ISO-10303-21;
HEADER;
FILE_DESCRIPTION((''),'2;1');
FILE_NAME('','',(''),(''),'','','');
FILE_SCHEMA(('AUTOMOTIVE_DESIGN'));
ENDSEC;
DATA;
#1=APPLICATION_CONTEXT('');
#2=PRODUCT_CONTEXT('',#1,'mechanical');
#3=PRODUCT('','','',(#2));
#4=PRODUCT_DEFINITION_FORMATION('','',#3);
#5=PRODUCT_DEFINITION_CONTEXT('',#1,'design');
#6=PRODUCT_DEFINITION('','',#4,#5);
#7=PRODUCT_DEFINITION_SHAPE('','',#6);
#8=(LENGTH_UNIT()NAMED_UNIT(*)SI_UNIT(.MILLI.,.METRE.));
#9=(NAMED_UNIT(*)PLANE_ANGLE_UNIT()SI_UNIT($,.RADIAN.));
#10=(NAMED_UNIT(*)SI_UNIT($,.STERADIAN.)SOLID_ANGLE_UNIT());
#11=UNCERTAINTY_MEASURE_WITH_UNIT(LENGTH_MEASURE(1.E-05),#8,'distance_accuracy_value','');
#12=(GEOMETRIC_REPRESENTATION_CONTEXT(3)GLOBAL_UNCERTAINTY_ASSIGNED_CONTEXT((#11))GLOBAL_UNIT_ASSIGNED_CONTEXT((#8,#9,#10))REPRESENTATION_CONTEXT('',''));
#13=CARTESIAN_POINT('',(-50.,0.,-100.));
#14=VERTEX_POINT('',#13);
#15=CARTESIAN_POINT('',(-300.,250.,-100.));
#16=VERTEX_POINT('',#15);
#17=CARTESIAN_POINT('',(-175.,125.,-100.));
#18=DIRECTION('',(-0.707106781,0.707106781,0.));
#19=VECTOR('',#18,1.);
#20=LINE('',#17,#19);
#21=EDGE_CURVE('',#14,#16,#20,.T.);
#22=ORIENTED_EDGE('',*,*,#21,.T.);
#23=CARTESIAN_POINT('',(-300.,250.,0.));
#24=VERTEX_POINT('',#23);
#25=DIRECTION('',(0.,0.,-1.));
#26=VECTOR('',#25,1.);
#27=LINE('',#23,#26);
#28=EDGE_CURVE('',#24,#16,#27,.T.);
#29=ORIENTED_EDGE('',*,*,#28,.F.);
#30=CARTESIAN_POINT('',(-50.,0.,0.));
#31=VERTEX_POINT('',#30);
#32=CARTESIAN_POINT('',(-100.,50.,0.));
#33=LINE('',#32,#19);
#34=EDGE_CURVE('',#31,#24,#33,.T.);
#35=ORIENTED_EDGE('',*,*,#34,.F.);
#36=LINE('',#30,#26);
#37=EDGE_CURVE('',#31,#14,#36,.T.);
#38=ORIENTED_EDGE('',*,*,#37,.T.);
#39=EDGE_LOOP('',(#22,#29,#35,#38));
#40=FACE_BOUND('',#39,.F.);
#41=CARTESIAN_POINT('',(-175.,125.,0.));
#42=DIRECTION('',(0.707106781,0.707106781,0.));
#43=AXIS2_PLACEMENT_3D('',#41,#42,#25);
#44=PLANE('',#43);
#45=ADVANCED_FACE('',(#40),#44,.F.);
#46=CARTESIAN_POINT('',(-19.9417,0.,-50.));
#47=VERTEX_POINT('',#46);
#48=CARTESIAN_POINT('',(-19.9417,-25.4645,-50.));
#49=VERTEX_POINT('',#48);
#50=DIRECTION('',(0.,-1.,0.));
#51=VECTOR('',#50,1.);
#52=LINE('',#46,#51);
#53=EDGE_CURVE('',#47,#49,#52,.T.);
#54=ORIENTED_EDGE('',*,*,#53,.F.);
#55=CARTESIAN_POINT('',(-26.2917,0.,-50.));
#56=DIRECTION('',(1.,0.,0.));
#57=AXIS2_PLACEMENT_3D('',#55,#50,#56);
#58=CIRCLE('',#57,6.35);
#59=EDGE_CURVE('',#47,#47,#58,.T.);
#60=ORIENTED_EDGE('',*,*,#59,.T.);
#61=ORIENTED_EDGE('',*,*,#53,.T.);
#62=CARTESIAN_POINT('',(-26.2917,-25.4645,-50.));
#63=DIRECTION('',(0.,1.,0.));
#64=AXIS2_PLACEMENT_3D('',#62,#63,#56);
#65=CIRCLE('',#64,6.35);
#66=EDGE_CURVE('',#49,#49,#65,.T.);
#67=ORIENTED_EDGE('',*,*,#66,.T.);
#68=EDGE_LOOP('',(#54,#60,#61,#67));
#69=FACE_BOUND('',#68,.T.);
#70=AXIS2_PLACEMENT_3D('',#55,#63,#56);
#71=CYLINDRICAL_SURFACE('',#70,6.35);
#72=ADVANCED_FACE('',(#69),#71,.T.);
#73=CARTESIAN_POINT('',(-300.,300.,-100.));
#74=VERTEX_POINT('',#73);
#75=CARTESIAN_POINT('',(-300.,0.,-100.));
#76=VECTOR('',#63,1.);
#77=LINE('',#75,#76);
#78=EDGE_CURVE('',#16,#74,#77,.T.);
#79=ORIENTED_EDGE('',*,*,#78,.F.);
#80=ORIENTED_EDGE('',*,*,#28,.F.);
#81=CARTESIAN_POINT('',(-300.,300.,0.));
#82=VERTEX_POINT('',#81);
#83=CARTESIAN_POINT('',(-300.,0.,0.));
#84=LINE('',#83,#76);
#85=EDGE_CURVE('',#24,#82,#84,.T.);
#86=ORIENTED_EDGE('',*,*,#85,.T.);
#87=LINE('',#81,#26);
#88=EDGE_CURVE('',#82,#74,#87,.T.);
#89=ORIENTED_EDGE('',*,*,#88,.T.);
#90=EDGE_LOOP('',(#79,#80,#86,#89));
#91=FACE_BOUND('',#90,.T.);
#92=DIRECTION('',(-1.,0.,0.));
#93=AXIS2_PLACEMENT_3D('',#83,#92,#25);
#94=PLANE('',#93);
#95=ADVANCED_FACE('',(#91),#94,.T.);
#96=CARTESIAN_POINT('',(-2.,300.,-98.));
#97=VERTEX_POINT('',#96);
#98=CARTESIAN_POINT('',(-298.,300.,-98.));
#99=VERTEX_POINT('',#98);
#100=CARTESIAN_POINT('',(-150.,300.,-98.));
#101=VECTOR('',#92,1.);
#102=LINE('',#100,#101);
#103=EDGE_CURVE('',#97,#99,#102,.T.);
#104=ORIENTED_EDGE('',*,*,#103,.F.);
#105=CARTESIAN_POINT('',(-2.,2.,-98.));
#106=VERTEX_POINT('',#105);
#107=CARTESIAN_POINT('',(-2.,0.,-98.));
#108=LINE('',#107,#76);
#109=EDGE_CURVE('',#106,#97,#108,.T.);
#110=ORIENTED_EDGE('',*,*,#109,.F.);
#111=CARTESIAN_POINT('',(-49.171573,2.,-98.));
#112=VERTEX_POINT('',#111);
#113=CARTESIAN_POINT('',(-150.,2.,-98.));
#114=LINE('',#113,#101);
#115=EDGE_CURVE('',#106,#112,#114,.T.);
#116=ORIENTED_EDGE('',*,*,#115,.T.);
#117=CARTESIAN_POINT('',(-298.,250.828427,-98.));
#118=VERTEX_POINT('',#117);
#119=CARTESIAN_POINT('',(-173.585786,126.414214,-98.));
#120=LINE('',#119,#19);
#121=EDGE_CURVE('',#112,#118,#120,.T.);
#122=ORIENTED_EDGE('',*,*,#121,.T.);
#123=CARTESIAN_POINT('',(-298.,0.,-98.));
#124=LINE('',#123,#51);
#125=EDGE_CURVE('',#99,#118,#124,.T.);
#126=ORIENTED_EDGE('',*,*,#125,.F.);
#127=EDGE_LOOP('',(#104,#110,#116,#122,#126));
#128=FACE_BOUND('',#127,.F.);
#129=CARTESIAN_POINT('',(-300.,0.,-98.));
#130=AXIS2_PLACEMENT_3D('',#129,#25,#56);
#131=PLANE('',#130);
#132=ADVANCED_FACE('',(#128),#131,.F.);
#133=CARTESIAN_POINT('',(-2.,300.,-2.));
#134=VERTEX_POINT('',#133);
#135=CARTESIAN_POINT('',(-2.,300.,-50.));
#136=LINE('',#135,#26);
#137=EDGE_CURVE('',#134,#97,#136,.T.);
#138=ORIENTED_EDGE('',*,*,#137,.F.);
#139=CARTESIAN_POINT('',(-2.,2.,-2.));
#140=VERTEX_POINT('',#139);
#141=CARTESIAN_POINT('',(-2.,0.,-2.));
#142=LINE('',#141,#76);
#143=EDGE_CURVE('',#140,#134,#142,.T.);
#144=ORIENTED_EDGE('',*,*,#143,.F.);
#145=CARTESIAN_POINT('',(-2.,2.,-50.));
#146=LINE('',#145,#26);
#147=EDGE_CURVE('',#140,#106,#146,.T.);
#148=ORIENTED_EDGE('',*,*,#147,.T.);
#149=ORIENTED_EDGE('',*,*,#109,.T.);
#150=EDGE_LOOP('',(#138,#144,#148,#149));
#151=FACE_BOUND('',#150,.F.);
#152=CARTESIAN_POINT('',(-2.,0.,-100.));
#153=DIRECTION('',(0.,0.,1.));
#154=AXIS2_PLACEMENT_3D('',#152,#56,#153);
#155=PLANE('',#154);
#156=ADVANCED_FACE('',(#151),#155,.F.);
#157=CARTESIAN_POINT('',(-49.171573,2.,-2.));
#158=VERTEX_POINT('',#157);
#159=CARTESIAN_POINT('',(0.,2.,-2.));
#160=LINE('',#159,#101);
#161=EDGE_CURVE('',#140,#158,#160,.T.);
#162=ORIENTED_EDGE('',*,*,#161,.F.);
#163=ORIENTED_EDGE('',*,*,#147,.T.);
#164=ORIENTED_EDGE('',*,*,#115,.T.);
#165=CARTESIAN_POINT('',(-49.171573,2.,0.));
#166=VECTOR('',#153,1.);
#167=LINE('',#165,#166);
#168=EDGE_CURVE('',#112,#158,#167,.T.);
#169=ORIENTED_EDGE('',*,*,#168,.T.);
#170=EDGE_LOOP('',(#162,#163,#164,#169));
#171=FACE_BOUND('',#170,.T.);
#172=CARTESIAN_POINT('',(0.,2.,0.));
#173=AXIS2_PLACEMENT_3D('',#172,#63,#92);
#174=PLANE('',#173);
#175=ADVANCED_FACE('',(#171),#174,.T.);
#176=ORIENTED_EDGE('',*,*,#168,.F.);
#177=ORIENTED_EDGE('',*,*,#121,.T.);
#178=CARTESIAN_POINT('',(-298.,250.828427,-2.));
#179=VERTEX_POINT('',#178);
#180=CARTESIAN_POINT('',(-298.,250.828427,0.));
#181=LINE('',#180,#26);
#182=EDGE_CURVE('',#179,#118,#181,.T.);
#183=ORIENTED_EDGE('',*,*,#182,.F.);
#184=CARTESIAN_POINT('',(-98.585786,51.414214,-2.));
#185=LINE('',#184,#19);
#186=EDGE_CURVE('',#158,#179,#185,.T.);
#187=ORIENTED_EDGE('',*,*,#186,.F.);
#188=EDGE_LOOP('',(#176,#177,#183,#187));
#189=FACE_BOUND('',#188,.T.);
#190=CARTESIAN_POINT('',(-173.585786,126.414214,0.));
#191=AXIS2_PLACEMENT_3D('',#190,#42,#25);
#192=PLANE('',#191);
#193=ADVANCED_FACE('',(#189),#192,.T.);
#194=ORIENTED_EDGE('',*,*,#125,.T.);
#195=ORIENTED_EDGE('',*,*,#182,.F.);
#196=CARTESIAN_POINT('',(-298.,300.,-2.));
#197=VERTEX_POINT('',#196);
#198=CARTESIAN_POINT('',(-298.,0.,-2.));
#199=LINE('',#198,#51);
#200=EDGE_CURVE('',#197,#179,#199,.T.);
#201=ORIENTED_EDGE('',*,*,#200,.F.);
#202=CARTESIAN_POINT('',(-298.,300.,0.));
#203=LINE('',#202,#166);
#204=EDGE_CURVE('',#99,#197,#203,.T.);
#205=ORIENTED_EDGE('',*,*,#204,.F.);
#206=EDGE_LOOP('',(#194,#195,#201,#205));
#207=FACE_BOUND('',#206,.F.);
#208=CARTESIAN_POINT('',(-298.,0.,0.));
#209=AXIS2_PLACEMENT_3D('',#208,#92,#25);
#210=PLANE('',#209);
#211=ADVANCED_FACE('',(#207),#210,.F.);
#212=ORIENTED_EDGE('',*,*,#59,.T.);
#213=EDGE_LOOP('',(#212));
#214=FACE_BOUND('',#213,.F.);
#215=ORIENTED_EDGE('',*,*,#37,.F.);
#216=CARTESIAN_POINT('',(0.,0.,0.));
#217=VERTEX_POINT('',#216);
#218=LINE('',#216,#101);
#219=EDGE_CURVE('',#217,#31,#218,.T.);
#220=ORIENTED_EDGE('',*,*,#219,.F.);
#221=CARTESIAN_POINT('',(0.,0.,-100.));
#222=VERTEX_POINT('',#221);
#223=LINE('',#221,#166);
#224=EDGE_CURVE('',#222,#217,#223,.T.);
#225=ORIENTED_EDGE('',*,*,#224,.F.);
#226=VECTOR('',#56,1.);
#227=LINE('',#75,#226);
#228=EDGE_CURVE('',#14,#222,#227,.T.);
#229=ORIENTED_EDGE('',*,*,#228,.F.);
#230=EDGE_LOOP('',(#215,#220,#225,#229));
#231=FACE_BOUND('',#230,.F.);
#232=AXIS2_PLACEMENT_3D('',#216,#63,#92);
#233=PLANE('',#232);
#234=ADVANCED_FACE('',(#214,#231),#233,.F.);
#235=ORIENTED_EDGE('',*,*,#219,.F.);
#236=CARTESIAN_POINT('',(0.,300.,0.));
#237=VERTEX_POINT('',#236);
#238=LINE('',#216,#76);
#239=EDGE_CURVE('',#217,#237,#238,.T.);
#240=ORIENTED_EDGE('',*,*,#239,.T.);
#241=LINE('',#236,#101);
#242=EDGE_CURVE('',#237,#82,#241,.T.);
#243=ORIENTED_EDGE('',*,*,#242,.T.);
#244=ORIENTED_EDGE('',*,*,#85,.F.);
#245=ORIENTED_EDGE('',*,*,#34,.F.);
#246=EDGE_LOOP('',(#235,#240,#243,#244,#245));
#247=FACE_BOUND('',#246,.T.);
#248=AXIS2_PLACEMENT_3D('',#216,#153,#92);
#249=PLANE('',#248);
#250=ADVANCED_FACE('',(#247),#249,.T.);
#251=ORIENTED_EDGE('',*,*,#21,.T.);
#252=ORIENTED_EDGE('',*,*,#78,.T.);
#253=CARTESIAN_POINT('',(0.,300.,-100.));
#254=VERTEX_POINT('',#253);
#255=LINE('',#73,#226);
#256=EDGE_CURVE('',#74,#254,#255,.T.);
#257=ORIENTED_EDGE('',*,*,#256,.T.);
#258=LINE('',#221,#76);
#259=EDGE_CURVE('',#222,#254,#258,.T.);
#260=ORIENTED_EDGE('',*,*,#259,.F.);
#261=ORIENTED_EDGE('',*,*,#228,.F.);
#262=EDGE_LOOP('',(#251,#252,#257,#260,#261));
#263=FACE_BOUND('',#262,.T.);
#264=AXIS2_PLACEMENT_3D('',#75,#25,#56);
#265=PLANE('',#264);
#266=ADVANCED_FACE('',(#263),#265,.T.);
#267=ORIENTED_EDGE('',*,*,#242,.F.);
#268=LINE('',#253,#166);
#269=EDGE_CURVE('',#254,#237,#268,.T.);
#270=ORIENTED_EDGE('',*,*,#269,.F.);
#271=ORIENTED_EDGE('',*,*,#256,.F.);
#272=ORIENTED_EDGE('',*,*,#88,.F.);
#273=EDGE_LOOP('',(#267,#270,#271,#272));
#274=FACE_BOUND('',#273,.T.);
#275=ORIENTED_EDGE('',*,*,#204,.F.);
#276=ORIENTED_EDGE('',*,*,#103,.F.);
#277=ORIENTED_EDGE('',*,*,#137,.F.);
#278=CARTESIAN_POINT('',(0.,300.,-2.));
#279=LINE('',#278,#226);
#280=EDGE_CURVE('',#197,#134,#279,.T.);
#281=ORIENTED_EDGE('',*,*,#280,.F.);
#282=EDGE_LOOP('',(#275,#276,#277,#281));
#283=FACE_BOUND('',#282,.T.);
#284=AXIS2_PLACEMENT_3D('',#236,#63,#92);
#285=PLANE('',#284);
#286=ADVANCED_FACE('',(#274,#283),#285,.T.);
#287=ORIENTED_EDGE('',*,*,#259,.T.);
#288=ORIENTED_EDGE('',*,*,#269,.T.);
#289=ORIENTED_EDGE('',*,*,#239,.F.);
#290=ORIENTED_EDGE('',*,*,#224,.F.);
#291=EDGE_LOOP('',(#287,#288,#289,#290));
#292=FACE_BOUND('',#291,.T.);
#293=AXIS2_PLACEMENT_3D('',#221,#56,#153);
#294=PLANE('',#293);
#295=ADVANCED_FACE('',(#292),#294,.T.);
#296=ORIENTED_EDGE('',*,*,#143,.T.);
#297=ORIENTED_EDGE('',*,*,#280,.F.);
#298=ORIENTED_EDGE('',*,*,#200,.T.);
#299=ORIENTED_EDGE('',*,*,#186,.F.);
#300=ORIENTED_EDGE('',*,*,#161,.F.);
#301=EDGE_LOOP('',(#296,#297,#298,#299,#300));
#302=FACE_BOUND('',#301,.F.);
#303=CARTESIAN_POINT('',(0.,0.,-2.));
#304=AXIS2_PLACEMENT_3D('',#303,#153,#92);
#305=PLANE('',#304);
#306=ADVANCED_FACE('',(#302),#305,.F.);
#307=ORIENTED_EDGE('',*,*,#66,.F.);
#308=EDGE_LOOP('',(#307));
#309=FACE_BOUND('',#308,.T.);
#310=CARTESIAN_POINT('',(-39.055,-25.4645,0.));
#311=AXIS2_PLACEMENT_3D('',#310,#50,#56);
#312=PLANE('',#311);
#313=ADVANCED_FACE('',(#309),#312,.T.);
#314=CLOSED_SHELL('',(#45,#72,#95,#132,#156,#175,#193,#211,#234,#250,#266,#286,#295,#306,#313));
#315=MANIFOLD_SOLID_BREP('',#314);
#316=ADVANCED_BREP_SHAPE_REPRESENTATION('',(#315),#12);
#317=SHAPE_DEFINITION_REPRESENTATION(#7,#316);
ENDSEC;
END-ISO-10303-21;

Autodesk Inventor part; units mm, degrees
ref_plane "YZ Plane" through (0, 0, 0) normal (1, 0, 0) x (0, 1, 0)
ref_plane "XZ Plane" through (0, 0, 0) normal (0, 1, 0) x (-1, 0, 0)
ref_plane "XY Plane" through (0, 0, 0) normal (0, 0, 1) x (1, 0, 0)
sketch "Sketch1" plane through (0, 0, 0) normal (0, 1, 0) x (-1, 0, 0)
  line L0 (0, 0) -> (300, 0)
  line L1 (300, 0) -> (300, -100)
  line L2 (300, -100) -> (0, -100)
  line L3 (0, -100) -> (0, 0)
  dimension "d0" = 300
  dimension "d1" = 100
extrude "Extrusion1" add sketch "Sketch1" along normal blind 300
chamfer "Chamfer1" distance 250 distance2 250 1 edges at (-300, 0, -50) measured on face at (-100, 0, -33.3333)
shell "Shell1" thickness 2 removed faces 1 at (-100, 300, -33.3333)
sketch "Sketch2" plane through (0, 0, 0) normal (0, -1, 0) x (1, 0, 0)
  circle A0 centre (-26.2917, -50) radius 6.35
  point P0 (0, 0)
  dimension "d8" = 12.7
extrude "Extrusion2" add sketch "Sketch2" along normal blind 50
sketch "Sketch3" plane through (0, 0, 0) normal (1, 0, 0) x (0, 1, 0)
  circle A0 centre (-44.5235, -49.6457) radius 6.35
  point P0 (0, 0)
  dimension "d11" = 12.7
extrude "Extrusion3" add sketch "Sketch3" against normal blind 32 and the other way blind 200
fillet_without_effect "Fillet1"
sketch "Sketch4" plane through (0, 0, 0) normal (0, 0, 1) x (1, 0, 0)
  line L0 (-39.055, -25.4645) -> (218.0396, -25.4645)
  line L1 (218.0396, -25.4645) -> (218.0396, -67.5796)
  line L2 (218.0396, -67.5796) -> (-39.055, -67.5796)
  line L3 (-39.055, -67.5796) -> (-39.055, -25.4645)
  point P0 (0, 0)
extrude "Extrusion4" cut sketch "Sketch4" against normal blind 254
equation "\"BendRadius\" = Thickness"
equation "\"BendReliefWidth\" = Thickness"
equation "\"BendReliefDepth\" = 0.5 * Thickness"
equation "\"CornerReliefSize\" = 4 * Thickness"
equation "\"MinimumRemnant\" = 2 * Thickness"
equation "\"TransitionRadius\" = BendRadius"
equation "\"JacobiRadiusSize\" = Thickness"
equation "\"GapSize\" = Thickness"
equation "\"Thickness\" = 3.048"
properties part number "hopper 2"
